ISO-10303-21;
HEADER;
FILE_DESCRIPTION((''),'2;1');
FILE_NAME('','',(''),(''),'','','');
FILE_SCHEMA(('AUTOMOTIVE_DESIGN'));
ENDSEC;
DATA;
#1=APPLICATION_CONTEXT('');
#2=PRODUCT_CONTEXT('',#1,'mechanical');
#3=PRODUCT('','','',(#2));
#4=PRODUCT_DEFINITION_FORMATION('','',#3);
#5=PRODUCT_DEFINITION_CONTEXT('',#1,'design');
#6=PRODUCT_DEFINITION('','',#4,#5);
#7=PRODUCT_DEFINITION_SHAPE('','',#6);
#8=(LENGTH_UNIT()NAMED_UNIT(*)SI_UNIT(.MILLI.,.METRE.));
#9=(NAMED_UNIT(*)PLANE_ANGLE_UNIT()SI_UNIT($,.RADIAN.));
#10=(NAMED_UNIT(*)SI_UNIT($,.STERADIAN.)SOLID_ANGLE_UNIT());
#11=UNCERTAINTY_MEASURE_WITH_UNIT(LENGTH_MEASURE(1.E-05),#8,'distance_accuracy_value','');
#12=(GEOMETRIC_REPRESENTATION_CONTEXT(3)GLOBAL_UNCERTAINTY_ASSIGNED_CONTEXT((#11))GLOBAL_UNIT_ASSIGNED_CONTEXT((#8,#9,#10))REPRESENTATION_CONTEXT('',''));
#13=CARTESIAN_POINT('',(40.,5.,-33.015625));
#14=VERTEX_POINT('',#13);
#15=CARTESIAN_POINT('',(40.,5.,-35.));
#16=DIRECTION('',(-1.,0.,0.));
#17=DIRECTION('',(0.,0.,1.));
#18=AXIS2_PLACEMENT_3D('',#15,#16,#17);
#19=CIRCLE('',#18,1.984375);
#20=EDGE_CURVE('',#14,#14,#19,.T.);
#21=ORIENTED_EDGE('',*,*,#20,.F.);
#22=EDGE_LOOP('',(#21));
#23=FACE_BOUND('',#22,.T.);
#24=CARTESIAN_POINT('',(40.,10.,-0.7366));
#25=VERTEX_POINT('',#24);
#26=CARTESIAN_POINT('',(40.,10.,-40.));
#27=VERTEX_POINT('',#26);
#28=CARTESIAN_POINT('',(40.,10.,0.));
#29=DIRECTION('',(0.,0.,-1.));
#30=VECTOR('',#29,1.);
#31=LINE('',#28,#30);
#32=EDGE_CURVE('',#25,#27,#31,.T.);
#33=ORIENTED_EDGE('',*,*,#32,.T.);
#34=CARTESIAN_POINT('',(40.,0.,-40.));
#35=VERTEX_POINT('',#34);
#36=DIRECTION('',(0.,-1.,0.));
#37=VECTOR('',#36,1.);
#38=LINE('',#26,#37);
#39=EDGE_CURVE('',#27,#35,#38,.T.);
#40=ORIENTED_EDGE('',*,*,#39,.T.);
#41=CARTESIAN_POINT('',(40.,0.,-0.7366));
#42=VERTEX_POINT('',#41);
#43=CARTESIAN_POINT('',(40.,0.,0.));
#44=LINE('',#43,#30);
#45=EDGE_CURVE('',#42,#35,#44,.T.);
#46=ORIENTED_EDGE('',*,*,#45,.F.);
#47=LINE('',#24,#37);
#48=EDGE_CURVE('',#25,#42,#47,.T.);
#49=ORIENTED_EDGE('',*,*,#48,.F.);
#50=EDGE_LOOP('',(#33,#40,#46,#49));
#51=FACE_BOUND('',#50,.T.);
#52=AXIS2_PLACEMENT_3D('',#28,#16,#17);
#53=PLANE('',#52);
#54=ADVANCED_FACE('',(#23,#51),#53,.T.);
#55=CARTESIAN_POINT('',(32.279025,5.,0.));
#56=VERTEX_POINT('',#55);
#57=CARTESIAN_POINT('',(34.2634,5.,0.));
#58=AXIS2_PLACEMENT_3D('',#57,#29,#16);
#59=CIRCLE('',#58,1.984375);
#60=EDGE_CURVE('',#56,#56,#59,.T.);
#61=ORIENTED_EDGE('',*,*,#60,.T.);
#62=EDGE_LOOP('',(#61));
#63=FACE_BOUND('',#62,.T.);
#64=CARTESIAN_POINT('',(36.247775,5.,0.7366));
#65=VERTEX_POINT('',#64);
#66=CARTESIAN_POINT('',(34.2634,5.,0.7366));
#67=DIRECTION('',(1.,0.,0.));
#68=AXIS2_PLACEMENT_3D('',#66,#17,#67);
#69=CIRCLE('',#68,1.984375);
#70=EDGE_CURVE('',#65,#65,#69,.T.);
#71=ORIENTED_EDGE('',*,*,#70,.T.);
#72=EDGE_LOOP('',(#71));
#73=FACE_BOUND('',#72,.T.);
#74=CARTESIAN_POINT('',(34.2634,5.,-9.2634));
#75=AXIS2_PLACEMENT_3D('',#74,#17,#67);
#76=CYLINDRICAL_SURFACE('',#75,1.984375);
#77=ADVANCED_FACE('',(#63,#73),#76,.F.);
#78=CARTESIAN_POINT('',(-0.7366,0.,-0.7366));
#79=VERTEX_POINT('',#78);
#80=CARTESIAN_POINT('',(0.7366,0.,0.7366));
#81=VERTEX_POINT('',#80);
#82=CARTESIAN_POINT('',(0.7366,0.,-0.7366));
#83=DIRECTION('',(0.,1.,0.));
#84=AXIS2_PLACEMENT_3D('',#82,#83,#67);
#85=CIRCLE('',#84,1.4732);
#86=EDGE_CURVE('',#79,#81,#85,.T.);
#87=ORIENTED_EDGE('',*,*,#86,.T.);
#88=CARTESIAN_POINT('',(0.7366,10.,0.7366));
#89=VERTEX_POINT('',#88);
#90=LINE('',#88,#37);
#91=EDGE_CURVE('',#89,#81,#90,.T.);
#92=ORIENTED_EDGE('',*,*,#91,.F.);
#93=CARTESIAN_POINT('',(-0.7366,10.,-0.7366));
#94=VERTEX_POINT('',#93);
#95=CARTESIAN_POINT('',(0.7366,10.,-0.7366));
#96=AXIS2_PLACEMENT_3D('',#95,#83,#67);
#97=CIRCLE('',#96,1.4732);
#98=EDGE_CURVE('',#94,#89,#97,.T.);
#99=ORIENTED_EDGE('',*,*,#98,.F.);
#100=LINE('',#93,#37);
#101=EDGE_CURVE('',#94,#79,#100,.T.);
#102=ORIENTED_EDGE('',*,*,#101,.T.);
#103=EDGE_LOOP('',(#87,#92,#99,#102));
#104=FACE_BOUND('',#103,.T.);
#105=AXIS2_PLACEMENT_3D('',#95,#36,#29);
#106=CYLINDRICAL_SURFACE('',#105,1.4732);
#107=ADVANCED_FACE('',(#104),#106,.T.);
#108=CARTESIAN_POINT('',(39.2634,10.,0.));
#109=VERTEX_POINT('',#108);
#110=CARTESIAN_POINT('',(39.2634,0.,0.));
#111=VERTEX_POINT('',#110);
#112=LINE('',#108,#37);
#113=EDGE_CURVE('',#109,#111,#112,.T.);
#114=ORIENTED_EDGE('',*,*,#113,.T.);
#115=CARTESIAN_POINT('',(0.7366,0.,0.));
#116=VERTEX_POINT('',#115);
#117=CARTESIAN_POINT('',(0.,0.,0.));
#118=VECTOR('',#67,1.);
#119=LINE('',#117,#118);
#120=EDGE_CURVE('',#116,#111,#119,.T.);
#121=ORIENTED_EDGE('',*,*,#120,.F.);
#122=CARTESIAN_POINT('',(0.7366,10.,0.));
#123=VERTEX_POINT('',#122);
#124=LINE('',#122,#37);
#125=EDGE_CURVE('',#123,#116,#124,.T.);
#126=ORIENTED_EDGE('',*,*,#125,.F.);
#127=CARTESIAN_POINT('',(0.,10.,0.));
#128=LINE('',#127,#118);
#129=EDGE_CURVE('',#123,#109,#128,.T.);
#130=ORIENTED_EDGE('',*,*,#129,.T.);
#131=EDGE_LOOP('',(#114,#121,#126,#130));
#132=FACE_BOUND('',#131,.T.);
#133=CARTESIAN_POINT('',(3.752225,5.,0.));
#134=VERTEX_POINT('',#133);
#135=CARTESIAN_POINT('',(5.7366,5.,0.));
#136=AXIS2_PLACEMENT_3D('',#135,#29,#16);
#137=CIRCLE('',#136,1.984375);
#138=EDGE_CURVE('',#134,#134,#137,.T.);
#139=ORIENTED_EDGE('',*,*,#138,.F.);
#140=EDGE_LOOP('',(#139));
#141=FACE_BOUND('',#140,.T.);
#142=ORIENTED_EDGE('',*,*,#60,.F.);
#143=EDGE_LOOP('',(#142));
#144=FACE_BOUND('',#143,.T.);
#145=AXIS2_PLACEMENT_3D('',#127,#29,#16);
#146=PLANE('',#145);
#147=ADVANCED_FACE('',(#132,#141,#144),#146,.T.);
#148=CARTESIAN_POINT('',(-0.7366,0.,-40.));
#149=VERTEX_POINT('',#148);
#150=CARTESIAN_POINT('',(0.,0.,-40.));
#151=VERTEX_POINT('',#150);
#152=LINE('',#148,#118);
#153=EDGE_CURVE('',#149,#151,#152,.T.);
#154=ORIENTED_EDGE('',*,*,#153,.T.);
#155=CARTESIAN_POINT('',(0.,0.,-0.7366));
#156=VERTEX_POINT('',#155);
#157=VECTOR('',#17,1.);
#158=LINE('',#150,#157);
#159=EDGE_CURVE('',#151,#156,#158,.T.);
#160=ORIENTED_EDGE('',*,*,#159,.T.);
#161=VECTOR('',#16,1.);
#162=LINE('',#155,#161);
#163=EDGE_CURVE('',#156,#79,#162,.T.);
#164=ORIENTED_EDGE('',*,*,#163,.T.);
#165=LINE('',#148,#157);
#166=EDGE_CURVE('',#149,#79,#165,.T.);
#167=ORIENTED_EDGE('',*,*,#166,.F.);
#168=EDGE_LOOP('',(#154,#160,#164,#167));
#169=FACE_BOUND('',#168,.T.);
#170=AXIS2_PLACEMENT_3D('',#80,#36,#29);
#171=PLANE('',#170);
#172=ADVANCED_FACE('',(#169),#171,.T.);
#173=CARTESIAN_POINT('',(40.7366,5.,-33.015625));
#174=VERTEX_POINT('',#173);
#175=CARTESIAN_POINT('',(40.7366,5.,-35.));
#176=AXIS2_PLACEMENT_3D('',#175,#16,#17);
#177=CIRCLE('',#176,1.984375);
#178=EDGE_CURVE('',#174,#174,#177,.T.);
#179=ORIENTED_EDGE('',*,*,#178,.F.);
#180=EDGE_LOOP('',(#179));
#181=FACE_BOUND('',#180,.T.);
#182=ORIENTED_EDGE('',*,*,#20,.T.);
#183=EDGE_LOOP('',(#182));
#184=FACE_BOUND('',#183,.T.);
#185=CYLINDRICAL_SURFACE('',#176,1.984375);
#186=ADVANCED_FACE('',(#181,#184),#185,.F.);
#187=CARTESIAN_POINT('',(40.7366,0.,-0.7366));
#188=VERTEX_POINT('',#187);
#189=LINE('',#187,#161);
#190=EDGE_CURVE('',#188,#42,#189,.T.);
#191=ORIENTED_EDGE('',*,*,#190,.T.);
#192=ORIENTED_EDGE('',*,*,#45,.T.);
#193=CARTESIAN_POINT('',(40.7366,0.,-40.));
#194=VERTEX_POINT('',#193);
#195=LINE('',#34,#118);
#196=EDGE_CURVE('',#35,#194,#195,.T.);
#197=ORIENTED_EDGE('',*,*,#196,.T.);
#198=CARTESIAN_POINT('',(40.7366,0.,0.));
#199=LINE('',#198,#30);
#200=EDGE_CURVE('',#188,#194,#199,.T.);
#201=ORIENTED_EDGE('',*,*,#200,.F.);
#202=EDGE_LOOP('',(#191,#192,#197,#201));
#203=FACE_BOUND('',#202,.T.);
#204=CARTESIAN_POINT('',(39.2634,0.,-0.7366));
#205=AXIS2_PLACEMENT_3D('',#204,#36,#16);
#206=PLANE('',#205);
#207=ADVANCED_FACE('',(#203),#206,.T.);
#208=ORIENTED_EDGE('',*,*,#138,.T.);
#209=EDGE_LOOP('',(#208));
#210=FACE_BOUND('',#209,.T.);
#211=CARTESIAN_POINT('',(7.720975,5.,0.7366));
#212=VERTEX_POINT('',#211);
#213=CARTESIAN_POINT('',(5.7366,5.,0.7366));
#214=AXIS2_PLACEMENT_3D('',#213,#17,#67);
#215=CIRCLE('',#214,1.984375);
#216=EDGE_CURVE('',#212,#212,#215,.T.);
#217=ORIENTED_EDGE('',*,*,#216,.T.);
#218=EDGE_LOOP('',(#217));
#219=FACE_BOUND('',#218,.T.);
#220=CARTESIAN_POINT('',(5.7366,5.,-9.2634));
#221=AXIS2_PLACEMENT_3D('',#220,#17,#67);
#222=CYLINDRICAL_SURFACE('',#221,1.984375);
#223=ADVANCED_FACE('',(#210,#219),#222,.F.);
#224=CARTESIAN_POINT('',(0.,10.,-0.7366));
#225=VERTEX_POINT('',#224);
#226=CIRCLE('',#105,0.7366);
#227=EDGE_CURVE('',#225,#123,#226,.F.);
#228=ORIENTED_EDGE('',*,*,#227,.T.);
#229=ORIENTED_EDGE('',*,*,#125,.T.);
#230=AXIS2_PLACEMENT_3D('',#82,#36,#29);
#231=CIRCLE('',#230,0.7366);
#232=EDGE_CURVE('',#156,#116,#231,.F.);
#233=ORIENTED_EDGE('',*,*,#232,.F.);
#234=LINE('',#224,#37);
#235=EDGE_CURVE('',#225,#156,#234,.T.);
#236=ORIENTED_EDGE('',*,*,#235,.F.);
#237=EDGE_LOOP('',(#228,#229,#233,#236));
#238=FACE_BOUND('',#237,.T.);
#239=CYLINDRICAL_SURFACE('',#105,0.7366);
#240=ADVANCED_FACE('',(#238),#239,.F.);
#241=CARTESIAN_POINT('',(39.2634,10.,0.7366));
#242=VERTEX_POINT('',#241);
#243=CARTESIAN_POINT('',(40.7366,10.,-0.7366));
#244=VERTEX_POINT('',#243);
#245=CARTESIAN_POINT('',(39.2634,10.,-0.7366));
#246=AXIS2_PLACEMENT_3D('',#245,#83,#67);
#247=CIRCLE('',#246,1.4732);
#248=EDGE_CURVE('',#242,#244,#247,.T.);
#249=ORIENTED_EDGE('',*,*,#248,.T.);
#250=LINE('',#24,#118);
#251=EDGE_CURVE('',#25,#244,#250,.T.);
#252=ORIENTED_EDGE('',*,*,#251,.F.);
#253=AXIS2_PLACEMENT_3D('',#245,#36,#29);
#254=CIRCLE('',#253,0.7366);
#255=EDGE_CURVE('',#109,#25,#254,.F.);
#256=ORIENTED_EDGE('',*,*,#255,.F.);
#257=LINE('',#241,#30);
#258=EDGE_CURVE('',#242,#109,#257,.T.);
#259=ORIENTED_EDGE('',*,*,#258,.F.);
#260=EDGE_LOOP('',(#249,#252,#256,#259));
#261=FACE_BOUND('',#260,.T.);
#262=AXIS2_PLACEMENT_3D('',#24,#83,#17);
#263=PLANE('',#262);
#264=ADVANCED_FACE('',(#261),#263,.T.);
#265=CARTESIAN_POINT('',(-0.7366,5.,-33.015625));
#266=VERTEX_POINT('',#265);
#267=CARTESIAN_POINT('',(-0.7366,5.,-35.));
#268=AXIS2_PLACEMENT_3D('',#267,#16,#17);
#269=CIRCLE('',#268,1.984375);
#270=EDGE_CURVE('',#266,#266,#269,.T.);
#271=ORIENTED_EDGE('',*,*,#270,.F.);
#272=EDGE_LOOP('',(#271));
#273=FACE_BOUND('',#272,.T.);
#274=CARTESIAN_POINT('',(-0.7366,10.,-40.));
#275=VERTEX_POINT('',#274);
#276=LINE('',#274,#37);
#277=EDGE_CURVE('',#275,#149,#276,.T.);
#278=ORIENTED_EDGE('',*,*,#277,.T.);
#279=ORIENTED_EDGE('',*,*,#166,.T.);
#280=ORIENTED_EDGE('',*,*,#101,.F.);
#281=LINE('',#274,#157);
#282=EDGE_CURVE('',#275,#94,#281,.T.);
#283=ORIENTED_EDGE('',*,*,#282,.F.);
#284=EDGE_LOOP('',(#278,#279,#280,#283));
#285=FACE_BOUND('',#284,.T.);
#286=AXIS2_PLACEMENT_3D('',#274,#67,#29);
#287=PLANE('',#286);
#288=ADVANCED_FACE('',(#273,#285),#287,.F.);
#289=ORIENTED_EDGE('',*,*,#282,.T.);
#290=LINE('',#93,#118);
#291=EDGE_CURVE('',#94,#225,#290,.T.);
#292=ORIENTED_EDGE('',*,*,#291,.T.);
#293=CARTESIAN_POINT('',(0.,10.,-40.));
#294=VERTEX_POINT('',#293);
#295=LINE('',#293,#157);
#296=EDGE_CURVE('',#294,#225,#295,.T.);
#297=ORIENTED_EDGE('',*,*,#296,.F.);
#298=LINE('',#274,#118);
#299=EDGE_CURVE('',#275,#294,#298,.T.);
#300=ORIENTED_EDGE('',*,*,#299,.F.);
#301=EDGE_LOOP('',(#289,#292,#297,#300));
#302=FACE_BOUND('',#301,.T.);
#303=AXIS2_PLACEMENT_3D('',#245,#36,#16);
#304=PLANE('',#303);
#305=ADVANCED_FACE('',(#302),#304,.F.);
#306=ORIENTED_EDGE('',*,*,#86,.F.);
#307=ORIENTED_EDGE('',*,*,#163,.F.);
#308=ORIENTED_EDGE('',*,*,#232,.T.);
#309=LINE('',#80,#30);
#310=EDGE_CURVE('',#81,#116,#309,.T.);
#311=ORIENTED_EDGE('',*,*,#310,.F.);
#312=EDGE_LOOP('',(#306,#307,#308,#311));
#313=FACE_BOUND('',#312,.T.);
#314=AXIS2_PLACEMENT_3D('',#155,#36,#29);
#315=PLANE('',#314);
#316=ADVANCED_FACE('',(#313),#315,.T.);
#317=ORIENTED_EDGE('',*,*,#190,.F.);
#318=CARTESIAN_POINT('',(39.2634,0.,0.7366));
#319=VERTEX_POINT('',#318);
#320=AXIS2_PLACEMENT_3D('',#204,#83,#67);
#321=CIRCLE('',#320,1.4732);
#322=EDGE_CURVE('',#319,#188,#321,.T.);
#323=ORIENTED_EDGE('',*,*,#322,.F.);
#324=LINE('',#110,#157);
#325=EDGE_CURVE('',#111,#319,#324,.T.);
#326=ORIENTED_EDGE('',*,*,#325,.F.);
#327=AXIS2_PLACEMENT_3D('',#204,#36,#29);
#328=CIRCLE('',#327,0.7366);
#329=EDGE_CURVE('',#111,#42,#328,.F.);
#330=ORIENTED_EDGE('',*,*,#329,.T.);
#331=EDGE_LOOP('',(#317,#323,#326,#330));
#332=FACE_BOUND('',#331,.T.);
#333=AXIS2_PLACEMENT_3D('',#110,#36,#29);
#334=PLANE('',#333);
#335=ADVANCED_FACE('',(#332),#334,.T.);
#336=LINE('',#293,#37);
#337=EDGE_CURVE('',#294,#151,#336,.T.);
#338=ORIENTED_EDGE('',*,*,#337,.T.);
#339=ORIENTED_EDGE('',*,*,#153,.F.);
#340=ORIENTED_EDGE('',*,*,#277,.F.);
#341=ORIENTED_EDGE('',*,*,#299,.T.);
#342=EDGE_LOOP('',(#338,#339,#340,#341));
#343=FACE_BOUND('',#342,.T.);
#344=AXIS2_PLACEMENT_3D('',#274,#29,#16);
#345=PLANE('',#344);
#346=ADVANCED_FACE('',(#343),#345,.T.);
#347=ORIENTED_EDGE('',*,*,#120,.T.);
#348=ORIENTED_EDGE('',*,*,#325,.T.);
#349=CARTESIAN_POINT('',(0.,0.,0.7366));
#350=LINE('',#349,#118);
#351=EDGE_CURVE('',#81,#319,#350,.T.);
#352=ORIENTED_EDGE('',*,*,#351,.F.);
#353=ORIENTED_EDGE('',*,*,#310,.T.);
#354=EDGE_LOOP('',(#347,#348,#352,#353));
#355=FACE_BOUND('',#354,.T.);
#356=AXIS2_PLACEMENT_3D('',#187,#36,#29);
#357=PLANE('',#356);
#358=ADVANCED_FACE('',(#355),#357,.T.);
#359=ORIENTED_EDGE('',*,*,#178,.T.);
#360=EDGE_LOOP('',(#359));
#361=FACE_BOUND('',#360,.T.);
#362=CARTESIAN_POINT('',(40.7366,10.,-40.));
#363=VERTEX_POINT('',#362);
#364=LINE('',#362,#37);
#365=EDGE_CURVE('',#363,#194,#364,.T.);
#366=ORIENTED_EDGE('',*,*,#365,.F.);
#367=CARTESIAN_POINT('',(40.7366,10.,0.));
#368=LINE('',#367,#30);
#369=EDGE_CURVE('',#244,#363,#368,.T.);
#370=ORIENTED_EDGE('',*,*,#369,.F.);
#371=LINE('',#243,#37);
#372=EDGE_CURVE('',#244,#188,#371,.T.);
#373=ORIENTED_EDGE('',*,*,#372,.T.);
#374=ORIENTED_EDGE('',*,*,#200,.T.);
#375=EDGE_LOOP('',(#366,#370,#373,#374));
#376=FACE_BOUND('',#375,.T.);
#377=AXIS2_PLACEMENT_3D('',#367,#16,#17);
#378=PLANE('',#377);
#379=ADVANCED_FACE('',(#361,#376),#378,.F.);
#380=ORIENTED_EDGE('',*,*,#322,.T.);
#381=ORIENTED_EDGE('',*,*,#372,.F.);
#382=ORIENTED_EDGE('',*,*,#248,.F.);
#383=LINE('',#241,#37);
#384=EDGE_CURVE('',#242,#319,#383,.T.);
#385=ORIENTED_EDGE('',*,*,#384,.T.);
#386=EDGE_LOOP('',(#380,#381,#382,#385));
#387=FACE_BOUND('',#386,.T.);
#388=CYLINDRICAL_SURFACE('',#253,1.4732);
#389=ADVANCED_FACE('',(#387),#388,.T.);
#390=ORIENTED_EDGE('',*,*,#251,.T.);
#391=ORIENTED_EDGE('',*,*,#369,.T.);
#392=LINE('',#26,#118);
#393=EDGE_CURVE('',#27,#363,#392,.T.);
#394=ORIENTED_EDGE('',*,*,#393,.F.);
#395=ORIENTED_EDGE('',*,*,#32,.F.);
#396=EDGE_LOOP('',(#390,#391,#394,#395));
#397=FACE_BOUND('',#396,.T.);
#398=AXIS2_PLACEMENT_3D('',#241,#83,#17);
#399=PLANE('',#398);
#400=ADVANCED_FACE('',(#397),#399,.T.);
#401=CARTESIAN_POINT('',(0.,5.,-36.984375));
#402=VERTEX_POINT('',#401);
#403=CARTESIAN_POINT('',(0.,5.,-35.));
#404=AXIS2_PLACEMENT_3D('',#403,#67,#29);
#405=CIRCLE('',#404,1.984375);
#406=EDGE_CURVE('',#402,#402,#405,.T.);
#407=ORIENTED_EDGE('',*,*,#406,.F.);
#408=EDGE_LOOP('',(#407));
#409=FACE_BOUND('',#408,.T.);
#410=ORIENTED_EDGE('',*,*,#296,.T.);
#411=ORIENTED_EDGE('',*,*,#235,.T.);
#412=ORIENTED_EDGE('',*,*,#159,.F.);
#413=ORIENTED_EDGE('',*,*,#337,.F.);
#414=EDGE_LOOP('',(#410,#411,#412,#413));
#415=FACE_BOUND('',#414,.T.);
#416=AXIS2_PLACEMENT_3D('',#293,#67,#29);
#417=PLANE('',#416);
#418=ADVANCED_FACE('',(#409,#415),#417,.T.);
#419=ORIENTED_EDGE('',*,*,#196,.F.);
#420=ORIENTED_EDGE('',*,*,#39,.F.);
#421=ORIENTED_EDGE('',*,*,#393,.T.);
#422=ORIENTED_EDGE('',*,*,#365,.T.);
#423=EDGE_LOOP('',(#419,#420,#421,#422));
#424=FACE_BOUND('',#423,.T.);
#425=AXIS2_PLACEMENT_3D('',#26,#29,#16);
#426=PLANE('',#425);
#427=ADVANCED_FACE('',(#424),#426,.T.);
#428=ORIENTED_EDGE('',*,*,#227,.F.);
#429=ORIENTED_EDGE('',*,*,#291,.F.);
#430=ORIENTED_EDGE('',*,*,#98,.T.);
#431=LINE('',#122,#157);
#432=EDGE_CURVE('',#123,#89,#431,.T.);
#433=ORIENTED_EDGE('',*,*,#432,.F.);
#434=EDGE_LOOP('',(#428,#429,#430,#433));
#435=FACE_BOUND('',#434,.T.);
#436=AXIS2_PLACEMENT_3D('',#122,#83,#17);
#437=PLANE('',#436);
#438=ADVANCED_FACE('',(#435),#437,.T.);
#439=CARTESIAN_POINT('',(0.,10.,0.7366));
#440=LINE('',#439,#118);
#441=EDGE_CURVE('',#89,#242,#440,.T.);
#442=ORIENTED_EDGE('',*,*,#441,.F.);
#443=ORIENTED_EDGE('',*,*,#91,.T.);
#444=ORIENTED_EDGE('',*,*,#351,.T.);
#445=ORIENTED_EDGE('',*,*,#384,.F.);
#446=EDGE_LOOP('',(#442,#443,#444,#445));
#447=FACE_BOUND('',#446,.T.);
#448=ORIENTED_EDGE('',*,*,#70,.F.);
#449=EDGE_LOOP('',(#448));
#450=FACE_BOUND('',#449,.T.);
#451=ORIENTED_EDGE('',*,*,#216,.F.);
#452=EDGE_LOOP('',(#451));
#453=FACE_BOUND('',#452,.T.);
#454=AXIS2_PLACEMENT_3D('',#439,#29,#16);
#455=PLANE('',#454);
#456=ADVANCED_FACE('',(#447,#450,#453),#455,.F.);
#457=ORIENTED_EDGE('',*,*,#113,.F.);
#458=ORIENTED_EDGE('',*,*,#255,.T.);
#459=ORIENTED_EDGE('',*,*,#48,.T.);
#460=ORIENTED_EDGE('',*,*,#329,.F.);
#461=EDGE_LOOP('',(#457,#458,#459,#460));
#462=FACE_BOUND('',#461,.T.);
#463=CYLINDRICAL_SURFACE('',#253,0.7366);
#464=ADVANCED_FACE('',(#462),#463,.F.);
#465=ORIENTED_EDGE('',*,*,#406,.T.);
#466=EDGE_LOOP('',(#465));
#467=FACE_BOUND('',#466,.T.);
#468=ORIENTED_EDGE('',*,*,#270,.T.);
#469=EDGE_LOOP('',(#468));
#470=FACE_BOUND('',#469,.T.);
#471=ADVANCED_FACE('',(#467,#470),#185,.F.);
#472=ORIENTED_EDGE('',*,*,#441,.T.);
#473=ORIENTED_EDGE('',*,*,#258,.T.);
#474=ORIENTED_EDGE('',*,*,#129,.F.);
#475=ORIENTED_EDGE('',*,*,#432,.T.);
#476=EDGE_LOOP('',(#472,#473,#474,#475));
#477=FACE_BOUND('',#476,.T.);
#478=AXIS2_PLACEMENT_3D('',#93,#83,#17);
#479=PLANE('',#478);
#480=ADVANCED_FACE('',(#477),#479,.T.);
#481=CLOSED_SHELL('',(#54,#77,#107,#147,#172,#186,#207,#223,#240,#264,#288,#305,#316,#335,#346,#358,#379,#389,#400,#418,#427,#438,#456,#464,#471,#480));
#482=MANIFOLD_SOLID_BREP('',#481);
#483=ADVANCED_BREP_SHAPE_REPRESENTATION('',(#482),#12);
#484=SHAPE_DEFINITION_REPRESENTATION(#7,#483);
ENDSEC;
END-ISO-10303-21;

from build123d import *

# Parameters (mm, degrees)
BASE_FLANGE1_DEPTH = 10
SKETCH6_R          = 1.984375
CUT_EXTRUDE1_DEPTH = 10
SKETCH7_R          = 1.984375
CUT_EXTRUDE2_DEPTH = 59.480991085


# Sheet-metal steps are written as plain solids
with BuildPart() as part:
    # Sketch1 → Base-Flange1 (new body)
    with BuildSketch(Plane(origin=(0, 0, 0), x_dir=(1, 0, 0), z_dir=(0, 1, 0))):
        with BuildLine():
            Line((0, 40), (0, 0.7366))
            ThreePointArc((0, 0.7366), (0.215745145, 0.215745145), (0.7366, 0))
            Line((0.7366, 0), (39.2634, 0))
            ThreePointArc((39.2634, 0), (39.784254855, 0.215745145), (40, 0.7366))
            Line((40, 0.7366), (40, 40))
            Line((40, 40), (40.7366, 40))
            Line((40.7366, 40), (40.7366, 0.7366))
            ThreePointArc((40.7366, 0.7366), (40.30510971, -0.30510971), (39.2634, -0.7366))
            Line((39.2634, -0.7366), (0.7366, -0.7366))
            ThreePointArc((0.7366, -0.7366), (-0.30510971, -0.30510971), (-0.7366, 0.7366))
            Line((-0.7366, 0.7366), (-0.7366, 40))
            Line((-0.7366, 40), (0, 40))
        make_face()
    extrude(amount=BASE_FLANGE1_DEPTH)

    # Sketch6 → Cut-Extrude1 (cut)
    with BuildSketch(Plane.XY.offset(0.7366)):
        with Locations((5.7366, 5)):
            Circle(SKETCH6_R)
        with Locations((34.2634, 5)):
            Circle(SKETCH6_R)
    extrude(amount=-CUT_EXTRUDE1_DEPTH, mode=Mode.SUBTRACT)

    # Sketch7 → Cut-Extrude2 (cut, through all)
    with BuildSketch(Plane.ZY.offset(0.7366)):
        with Locations((-35, 5)):
            Circle(SKETCH7_R)
    extrude(amount=-CUT_EXTRUDE2_DEPTH, mode=Mode.SUBTRACT)


solid = part.part
